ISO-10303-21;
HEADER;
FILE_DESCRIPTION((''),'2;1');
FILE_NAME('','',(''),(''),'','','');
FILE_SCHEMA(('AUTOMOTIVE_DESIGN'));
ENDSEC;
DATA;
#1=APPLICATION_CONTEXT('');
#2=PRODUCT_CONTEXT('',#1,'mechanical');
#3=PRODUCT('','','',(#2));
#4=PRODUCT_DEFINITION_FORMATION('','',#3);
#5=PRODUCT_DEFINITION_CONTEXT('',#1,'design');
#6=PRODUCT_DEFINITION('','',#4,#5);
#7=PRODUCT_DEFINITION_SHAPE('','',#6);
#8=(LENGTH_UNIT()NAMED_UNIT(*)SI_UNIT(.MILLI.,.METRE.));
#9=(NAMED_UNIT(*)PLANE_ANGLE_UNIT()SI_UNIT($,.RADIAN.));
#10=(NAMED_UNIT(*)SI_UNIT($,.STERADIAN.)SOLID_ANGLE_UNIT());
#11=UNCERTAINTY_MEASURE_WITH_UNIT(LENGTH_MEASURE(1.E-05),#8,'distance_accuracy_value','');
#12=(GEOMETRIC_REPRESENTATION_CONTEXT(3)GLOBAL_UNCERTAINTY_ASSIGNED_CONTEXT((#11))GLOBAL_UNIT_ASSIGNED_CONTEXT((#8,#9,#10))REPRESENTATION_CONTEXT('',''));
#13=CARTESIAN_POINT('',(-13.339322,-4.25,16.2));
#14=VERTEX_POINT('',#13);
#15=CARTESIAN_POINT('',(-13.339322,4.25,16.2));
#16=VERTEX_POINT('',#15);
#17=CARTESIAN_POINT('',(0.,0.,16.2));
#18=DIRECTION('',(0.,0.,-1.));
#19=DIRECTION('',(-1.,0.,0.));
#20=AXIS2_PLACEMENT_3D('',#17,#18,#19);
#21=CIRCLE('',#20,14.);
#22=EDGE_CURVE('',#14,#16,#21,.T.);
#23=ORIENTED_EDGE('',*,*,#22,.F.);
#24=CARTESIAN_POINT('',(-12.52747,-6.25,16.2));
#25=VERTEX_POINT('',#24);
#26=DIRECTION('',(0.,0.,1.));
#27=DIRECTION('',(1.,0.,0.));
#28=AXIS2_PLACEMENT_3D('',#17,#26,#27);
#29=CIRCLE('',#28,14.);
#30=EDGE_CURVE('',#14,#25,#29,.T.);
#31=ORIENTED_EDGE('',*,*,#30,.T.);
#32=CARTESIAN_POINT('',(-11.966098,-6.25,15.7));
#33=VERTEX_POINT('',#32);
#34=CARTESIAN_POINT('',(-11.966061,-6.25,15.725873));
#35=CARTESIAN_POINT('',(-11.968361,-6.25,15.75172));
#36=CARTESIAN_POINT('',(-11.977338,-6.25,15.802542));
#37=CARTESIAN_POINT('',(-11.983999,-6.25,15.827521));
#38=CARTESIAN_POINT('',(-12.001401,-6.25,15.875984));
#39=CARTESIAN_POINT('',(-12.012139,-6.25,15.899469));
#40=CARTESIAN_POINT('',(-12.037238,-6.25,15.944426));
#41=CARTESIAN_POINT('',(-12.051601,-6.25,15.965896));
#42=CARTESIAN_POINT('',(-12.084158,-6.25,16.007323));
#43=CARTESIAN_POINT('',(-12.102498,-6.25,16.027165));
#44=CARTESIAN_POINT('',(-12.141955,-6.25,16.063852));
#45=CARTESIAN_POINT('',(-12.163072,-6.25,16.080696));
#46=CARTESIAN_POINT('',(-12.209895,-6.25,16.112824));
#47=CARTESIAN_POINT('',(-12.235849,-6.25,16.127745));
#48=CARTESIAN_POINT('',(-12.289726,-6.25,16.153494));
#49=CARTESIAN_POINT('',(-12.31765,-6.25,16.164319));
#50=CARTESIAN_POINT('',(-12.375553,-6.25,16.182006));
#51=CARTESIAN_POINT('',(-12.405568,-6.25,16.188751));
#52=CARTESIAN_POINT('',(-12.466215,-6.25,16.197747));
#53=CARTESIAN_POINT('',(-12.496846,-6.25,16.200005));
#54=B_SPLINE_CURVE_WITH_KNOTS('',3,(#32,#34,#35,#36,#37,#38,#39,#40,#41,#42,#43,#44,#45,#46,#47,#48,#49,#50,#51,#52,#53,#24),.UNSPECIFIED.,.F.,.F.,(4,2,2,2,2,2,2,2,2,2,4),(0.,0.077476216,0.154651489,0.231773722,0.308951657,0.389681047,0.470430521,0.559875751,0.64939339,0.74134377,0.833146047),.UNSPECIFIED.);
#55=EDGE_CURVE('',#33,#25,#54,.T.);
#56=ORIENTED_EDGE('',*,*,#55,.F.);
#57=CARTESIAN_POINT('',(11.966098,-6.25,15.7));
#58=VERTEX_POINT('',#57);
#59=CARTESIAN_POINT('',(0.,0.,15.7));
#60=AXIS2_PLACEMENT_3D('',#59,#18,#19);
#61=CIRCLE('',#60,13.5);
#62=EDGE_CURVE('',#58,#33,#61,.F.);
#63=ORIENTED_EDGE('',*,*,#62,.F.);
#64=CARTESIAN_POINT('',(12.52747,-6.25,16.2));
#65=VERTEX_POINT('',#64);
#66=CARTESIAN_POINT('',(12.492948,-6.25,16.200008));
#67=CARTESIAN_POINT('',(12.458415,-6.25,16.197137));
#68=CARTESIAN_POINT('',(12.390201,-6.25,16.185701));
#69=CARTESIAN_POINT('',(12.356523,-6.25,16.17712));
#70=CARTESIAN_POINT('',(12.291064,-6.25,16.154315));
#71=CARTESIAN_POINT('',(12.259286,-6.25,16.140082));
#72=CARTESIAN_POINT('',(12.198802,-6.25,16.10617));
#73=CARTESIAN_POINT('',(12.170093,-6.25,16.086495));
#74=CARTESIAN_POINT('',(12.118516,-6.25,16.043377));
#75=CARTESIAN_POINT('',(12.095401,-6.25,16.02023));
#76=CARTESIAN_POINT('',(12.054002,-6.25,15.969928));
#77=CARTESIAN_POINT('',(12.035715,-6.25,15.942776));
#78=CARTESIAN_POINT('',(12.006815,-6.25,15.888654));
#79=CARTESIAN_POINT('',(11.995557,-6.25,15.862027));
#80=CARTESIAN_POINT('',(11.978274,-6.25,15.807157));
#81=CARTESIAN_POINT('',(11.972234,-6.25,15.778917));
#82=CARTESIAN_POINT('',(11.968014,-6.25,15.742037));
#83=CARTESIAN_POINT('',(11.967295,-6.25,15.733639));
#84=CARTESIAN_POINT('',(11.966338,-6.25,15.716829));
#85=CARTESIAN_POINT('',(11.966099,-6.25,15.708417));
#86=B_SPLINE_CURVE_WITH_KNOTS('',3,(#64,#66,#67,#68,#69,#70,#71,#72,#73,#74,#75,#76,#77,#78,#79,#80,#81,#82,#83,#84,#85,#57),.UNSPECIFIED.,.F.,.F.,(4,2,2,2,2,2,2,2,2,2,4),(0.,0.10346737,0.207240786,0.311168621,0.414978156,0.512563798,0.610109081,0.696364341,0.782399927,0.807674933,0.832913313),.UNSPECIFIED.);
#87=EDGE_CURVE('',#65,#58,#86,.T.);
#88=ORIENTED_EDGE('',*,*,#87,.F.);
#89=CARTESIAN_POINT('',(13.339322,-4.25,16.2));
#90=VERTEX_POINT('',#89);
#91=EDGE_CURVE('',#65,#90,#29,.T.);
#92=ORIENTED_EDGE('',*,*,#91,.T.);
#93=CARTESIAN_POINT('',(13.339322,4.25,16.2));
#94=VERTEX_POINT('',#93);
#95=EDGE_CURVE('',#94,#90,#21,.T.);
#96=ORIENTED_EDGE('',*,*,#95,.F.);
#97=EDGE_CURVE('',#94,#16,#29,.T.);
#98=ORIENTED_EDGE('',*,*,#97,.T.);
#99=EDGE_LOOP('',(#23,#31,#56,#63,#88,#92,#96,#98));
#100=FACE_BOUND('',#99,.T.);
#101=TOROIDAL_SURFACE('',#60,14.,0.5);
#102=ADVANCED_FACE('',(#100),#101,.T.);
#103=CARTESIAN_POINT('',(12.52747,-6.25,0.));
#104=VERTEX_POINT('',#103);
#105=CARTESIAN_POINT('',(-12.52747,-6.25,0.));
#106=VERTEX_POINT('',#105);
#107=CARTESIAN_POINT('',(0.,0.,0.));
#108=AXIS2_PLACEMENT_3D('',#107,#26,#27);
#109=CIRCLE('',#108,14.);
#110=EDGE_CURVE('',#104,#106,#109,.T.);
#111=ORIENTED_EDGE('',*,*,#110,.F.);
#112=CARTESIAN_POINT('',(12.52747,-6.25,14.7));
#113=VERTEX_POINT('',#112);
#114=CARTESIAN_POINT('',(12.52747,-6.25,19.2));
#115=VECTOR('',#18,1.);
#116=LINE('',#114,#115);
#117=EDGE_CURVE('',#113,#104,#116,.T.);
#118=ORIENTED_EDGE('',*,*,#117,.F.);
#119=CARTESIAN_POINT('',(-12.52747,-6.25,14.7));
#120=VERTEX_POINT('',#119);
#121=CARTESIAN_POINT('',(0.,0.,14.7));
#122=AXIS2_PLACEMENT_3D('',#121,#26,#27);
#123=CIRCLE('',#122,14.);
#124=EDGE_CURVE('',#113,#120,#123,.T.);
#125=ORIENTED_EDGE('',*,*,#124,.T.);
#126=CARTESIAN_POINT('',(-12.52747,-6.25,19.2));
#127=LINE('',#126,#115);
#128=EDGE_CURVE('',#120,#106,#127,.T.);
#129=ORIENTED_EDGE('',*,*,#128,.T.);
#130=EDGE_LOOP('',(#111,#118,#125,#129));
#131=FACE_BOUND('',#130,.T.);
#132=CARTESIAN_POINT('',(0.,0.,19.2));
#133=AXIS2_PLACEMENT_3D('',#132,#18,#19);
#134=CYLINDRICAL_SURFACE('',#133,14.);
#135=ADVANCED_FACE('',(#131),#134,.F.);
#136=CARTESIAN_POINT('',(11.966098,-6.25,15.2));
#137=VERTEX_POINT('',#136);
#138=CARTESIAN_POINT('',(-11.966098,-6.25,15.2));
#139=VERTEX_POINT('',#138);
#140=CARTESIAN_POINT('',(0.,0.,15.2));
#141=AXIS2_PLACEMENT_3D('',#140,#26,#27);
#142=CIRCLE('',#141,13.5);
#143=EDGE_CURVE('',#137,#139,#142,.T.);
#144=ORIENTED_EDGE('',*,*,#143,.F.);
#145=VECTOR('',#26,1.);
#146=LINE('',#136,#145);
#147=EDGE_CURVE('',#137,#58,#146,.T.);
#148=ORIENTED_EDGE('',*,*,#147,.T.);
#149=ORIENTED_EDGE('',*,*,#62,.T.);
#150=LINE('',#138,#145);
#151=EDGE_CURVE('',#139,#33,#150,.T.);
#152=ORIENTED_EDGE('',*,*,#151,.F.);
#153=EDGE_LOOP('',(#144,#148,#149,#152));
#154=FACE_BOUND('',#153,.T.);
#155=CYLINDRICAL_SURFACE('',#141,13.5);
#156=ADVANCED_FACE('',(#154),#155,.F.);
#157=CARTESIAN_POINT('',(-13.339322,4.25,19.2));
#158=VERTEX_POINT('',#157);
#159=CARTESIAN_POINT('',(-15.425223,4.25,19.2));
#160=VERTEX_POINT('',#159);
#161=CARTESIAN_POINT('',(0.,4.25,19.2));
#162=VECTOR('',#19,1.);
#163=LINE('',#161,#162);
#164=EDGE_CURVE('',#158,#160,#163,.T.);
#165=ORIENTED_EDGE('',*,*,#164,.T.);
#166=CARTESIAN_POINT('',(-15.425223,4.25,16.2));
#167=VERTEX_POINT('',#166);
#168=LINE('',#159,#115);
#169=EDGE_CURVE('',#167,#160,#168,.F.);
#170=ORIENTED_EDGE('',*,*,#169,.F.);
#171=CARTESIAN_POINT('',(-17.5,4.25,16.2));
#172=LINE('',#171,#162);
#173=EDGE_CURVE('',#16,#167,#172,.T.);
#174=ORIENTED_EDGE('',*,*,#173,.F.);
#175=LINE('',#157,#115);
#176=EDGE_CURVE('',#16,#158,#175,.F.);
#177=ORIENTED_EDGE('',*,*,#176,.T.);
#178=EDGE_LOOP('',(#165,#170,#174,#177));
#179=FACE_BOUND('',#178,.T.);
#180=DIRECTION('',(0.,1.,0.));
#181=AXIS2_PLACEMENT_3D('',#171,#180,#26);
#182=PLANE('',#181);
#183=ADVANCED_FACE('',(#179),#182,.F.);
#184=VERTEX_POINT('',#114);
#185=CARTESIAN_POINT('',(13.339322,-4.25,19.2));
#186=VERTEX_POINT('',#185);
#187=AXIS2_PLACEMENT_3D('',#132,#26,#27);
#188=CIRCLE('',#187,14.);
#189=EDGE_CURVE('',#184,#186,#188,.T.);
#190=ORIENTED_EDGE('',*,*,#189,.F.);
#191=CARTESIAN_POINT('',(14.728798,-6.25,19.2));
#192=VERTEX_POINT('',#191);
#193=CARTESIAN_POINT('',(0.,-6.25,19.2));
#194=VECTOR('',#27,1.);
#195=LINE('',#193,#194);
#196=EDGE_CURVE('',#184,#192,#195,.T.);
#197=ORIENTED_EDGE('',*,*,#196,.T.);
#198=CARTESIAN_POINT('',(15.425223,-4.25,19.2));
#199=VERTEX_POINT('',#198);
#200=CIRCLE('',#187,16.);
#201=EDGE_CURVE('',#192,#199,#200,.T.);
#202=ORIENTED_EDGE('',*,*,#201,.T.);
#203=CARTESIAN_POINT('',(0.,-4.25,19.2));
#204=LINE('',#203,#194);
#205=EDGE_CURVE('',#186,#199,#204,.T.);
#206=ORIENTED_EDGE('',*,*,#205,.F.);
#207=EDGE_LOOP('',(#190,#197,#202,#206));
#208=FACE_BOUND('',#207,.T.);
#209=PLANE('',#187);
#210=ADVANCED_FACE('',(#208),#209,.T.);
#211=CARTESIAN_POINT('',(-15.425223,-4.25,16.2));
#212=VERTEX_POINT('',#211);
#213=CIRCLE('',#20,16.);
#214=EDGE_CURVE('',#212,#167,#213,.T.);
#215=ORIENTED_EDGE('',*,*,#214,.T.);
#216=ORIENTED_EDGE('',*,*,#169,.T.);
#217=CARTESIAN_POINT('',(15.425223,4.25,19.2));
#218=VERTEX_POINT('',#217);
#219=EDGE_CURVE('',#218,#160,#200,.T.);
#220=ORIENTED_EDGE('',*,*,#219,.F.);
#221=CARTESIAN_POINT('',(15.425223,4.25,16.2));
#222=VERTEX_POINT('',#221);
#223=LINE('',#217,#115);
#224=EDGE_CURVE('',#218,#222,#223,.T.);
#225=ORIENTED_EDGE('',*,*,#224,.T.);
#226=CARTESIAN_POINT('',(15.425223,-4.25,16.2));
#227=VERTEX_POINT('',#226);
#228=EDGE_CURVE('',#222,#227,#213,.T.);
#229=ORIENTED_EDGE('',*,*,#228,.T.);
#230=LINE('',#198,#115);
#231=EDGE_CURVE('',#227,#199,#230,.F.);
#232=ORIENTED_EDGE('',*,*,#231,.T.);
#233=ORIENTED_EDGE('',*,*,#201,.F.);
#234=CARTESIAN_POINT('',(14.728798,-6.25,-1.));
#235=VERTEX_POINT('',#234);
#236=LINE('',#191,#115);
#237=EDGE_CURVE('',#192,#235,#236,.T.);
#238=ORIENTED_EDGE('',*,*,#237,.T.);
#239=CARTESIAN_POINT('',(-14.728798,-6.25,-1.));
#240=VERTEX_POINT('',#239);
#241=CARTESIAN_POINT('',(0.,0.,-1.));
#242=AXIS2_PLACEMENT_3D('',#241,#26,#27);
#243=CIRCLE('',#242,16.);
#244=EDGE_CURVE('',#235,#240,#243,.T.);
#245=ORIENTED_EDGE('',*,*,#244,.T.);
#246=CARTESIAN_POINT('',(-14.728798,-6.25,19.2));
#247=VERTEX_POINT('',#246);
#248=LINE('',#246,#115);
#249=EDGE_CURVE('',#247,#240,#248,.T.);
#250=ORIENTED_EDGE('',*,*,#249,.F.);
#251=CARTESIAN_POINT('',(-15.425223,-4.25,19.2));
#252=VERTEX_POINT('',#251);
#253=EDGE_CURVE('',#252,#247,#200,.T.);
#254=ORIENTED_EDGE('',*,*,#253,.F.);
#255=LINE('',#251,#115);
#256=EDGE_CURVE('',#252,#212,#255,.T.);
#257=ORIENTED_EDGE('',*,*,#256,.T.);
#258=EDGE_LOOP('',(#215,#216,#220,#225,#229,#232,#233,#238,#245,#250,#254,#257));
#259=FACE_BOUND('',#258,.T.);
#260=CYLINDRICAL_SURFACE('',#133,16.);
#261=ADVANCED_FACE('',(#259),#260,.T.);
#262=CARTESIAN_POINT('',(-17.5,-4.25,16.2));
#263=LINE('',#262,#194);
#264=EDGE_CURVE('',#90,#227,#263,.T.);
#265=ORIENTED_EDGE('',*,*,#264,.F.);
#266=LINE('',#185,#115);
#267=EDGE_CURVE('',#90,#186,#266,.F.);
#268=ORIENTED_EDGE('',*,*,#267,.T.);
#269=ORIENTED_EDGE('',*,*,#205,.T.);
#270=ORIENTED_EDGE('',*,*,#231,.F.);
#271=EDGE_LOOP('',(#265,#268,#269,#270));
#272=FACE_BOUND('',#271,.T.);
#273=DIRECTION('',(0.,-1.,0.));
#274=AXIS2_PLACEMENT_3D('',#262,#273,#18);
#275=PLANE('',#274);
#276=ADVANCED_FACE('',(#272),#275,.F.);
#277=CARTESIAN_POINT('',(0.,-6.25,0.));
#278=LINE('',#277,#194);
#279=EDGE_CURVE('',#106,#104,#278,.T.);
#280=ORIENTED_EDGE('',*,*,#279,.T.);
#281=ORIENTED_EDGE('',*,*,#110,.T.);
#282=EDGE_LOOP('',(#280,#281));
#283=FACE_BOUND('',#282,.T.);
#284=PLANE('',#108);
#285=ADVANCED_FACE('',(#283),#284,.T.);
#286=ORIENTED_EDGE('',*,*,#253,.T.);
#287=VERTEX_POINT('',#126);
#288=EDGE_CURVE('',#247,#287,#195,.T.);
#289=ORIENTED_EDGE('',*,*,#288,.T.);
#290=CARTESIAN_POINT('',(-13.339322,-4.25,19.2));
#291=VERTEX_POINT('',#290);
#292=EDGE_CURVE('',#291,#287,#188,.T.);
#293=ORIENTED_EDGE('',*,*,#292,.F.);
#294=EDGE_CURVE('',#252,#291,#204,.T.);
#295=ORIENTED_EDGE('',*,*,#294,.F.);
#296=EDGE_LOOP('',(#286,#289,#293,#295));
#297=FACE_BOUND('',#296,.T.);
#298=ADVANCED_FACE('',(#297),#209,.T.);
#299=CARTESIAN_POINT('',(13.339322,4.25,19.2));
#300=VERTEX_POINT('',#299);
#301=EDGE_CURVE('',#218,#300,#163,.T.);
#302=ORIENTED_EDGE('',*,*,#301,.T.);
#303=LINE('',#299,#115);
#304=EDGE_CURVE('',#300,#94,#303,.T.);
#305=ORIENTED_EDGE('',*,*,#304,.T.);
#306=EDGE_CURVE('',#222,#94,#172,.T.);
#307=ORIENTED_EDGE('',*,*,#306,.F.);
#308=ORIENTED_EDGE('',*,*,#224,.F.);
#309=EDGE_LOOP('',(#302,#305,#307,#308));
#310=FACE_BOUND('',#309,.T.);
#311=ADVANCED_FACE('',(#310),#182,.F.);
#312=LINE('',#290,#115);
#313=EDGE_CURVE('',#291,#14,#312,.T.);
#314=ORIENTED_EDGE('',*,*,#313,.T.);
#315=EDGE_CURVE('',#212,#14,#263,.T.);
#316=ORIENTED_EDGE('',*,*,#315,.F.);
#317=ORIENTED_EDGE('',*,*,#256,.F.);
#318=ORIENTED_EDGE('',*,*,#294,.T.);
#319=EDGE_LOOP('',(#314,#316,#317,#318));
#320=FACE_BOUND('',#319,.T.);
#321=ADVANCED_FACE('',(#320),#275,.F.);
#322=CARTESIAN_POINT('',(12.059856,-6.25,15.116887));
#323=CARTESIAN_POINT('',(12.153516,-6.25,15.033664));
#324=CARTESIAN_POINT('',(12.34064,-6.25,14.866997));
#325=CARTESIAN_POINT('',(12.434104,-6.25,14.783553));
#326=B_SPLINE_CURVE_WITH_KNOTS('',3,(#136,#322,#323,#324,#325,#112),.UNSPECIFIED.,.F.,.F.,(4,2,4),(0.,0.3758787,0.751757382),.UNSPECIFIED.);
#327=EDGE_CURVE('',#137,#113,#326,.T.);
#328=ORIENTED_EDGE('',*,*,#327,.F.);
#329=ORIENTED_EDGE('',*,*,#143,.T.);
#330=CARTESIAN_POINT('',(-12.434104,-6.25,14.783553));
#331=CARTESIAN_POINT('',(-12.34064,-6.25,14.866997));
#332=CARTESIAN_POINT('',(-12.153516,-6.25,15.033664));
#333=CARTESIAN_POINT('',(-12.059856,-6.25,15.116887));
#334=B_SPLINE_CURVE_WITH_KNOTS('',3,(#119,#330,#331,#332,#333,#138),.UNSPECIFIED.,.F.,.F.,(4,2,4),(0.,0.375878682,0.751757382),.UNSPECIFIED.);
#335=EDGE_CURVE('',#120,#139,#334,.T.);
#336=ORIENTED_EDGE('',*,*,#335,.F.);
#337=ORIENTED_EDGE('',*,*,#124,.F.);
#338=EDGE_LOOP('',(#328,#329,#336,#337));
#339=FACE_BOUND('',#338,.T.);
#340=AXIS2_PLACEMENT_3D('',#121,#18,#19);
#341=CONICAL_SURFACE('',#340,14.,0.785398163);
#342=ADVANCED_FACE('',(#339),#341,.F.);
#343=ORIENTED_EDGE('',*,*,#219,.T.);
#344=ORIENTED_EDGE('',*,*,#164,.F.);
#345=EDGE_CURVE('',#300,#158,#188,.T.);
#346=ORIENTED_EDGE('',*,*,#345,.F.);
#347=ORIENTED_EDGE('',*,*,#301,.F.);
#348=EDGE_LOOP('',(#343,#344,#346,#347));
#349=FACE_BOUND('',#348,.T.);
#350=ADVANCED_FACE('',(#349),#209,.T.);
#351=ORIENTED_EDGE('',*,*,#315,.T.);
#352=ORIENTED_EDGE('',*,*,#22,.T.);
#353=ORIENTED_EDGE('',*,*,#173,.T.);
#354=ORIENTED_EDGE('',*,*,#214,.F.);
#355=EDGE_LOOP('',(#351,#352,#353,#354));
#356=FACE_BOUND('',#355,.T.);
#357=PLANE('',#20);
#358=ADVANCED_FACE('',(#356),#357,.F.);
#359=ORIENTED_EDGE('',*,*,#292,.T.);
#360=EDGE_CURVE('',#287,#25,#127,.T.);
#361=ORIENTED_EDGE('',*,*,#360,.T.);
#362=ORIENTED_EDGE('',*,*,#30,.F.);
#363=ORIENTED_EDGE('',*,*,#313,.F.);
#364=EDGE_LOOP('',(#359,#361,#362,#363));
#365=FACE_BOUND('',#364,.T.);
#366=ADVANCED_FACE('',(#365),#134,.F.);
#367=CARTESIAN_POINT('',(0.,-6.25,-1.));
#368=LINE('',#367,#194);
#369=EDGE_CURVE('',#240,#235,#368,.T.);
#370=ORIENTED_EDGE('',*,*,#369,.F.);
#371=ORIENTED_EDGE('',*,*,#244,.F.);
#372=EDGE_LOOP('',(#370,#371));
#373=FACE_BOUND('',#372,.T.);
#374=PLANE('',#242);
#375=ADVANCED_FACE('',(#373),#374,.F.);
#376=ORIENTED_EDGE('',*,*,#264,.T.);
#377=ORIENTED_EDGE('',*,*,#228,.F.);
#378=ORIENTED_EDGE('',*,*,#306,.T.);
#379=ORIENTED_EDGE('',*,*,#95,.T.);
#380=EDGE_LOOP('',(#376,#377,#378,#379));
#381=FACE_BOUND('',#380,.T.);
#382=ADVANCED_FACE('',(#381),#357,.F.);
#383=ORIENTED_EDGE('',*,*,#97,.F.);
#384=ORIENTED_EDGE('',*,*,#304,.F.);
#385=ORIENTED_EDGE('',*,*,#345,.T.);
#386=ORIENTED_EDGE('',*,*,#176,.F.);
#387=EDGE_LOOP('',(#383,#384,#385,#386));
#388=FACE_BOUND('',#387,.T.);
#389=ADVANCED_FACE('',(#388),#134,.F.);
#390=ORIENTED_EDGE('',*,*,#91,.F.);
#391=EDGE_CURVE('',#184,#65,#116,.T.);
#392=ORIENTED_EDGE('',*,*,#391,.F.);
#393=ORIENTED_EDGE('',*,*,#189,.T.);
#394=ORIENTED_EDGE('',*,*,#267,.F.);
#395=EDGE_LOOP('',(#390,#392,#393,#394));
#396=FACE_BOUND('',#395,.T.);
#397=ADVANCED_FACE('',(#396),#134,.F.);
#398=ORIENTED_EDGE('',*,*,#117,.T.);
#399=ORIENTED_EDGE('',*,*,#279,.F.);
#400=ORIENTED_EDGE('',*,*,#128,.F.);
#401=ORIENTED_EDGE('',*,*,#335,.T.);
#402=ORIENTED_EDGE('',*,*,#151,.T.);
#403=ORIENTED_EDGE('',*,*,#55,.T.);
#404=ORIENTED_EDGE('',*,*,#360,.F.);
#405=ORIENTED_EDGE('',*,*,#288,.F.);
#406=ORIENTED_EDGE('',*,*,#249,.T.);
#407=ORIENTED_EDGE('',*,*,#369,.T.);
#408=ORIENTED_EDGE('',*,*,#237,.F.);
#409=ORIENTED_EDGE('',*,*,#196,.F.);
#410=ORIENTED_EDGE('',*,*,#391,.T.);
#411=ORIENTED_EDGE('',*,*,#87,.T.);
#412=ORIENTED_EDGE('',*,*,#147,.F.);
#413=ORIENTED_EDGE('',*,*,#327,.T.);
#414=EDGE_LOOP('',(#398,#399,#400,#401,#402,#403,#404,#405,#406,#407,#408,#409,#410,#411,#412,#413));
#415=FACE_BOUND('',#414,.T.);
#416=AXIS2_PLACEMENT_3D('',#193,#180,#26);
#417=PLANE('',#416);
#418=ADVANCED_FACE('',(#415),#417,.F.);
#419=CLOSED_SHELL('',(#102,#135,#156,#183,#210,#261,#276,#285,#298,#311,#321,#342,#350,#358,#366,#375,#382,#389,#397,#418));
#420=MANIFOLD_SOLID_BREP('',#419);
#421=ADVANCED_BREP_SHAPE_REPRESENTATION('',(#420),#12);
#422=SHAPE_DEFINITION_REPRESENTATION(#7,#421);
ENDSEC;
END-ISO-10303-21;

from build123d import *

# Parameters (mm, degrees)
BOSS_EXTRUDE1_DEPTH = 19.2
BOSS_EXTRUDE2_START = -1
BOSS_EXTRUDE2_DEPTH = 1
SKETCH2_W           = 35
SKETCH2_H           = 8.5
CUT_EXTRUDE1_DEPTH  = 3
BOSS_EXTRUDE3_START = -1
BOSS_EXTRUDE3_DEPTH = 1
CHAMFER1_SIZE       = 0.5


with BuildPart() as part:
    # Sketch1 → Boss-Extrude1 (new body)
    with BuildSketch(Plane.XY):
        with BuildLine():
            ThreePointArc((16, 0), (-3.188983134, 15.67897913), (-14.728798322, -6.25))
            Line((-14.728798322, -6.25), (-12.527469816, -6.25))
            ThreePointArc((-12.527469816, -6.25), (-3.210562456, 13.626895784), (14, 0))
            ThreePointArc((14, 0), (13.626895784, -3.210562456), (12.527469816, -6.25))
            Line((12.527469816, -6.25), (14.728798322, -6.25))
            ThreePointArc((14.728798322, -6.25), (15.67897913, -3.188983134), (16, 0))
        make_face()
    extrude(amount=BOSS_EXTRUDE1_DEPTH)

    # Sketch1<3> → Boss-Extrude2 (add)
    with BuildSketch(Plane.XY.offset(BOSS_EXTRUDE2_START)):
        with BuildLine():
            ThreePointArc((14, 0), (-3.210562456, 13.626895784), (-12.527469816, -6.25))
            Line((-12.527469816, -6.25), (12.527469816, -6.25))
            ThreePointArc((12.527469816, -6.25), (13.626895784, -3.210562456), (14, 0))
        make_face()
        with BuildLine():
            ThreePointArc((16, 0), (-3.188983134, 15.67897913), (-14.728798322, -6.25))
            Line((-14.728798322, -6.25), (-12.527469816, -6.25))
            ThreePointArc((-12.527469816, -6.25), (-3.210562456, 13.626895784), (14, 0))
            ThreePointArc((14, 0), (13.626895784, -3.210562456), (12.527469816, -6.25))
            Line((12.527469816, -6.25), (14.728798322, -6.25))
            ThreePointArc((14.728798322, -6.25), (15.67897913, -3.188983134), (16, 0))
        make_face()
    extrude(amount=BOSS_EXTRUDE2_DEPTH)

    # Sketch2 → Cut-Extrude1 (cut)
    with BuildSketch(Plane.XY.offset(19.2)):
        Rectangle(SKETCH2_W, SKETCH2_H)
    extrude(amount=-CUT_EXTRUDE1_DEPTH, mode=Mode.SUBTRACT)

    # Sketch3 → Boss-Extrude3 (add)
    with BuildSketch(Plane.XY.offset(16.2).offset(BOSS_EXTRUDE3_START)):
        with BuildLine():
            ThreePointArc((13.339321572, 4.25), (-5.265669551, 12.971997694), (-12.527469816, -6.25))
            Line((-12.527469816, -6.25), (-11.966097944, -6.25))
            ThreePointArc((-11.966097944, -6.25), (-3.217738162, 13.110917631), (13.5, 0))
            ThreePointArc((13.5, 0), (13.110917631, -3.217738162), (11.966097944, -6.25))
            Line((11.966097944, -6.25), (12.527469816, -6.25))
            ThreePointArc((12.527469816, -6.25), (12.971997694, -5.265669551), (13.339321572, -4.25))
            ThreePointArc((13.339321572, -4.25), (13.833844404, -2.150522959), (14, 0))
            ThreePointArc((14, 0), (13.833844404, 2.150522959), (13.339321572, 4.25))
        make_face()
    extrude(amount=BOSS_EXTRUDE3_DEPTH)

    # Fillet1: read off the stored shape, not the designer's step
    # Fillet1 outline → Fillet1 (revolve, cut)
    with BuildSketch(Plane.XZ):
        with BuildLine():
            Line((13.5, 16.2), (13.5, 15.7))
            ThreePointArc((13.5, 15.7), (13.646446609, 16.053553391), (14, 16.2))
            Line((14, 16.2), (13.5, 16.2))
        make_face()
    revolve(axis=Axis((0, 0, 0), (0, 0, 1)), mode=Mode.SUBTRACT)

    # Chamfer1
    chamfer1_edges = [part.edges().sort_by_distance(p)[0] for p in [
        (-3.210562456, 13.626895784, 15.2),
    ]]
    chamfer(chamfer1_edges, length=CHAMFER1_SIZE - 0.0001)  # a hair under: the kernel refuses the full size


solid = part.part
